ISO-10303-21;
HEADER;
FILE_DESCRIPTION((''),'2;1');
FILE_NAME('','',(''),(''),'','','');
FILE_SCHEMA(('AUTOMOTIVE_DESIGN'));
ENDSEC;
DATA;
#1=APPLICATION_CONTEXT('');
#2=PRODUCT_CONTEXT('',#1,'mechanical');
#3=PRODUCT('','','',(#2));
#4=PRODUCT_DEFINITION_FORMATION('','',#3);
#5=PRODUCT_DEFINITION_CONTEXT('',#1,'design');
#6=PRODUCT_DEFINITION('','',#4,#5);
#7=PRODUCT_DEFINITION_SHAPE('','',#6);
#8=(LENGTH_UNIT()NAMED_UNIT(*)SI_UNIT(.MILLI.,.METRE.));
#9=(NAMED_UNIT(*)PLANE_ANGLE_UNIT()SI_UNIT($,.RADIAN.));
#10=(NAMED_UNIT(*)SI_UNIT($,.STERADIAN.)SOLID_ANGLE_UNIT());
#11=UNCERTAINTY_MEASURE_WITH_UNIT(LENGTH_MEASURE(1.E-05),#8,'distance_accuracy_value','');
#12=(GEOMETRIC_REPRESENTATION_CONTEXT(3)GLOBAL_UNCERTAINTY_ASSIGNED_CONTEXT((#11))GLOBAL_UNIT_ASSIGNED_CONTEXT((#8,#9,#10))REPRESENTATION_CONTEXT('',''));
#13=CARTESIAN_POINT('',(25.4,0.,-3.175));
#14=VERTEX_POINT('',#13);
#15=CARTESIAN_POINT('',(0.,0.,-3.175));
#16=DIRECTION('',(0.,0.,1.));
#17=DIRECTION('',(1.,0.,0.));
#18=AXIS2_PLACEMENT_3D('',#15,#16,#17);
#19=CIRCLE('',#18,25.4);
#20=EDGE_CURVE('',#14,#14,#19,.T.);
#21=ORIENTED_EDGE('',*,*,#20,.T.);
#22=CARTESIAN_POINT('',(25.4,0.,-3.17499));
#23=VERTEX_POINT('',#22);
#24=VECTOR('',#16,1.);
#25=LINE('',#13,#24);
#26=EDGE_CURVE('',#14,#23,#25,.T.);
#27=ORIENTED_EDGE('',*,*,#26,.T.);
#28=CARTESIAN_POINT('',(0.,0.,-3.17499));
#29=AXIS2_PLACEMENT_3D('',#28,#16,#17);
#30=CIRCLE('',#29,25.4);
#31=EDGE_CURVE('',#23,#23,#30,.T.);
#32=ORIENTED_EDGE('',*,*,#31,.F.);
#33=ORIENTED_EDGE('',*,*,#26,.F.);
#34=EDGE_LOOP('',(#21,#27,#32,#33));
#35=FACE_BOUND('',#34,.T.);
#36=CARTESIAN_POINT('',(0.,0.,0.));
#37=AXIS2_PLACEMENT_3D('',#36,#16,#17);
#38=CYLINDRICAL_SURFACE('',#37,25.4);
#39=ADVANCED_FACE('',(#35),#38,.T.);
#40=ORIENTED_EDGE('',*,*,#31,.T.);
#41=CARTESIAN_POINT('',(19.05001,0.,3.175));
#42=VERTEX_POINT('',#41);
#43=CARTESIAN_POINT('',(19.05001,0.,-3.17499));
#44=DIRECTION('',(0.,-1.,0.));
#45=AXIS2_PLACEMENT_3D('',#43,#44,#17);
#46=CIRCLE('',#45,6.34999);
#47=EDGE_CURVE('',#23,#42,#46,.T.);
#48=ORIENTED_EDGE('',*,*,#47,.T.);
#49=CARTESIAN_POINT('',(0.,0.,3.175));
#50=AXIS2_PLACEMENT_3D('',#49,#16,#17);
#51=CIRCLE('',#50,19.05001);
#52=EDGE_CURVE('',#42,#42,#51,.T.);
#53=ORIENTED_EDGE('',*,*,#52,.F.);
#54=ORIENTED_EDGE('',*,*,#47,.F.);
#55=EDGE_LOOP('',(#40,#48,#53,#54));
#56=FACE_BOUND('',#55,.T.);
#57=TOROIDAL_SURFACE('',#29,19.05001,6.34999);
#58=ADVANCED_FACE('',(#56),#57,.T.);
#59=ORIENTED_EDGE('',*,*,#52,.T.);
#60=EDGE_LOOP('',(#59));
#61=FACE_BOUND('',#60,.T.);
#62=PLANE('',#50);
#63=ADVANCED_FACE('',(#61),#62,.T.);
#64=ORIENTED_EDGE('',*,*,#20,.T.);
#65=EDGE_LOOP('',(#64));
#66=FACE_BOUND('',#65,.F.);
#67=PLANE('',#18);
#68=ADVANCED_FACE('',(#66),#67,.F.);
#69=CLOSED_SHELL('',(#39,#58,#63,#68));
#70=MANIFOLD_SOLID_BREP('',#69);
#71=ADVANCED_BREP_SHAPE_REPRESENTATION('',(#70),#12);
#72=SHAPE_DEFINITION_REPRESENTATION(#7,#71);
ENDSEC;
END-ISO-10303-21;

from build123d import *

# Parameters (mm, degrees)
F0_R     = 25.4
F1_DEPTH = 3.175
F2_R     = 6.34999


# Not quite as in the source:
# - a fillet or chamfer is up to 0.001 mm smaller than in the source, because OpenCascade refuses the exact size


with BuildPart() as f1:
    # F0 (on Top) → F1 (new body, symmetric)
    with BuildSketch(Plane.XY):
        Circle(F0_R)
    extrude(amount=F1_DEPTH, both=True)

    # F2 (radius 6.35 in the source; OpenCascade refuses exactly that, so slightly less here)
    f2_edges = [f1.edges().sort_by_distance(p)[0] for p in [
        (-25.4, 0, 3.175),
    ]]
    fillet(f2_edges, radius=F2_R)


solid = f1.part
